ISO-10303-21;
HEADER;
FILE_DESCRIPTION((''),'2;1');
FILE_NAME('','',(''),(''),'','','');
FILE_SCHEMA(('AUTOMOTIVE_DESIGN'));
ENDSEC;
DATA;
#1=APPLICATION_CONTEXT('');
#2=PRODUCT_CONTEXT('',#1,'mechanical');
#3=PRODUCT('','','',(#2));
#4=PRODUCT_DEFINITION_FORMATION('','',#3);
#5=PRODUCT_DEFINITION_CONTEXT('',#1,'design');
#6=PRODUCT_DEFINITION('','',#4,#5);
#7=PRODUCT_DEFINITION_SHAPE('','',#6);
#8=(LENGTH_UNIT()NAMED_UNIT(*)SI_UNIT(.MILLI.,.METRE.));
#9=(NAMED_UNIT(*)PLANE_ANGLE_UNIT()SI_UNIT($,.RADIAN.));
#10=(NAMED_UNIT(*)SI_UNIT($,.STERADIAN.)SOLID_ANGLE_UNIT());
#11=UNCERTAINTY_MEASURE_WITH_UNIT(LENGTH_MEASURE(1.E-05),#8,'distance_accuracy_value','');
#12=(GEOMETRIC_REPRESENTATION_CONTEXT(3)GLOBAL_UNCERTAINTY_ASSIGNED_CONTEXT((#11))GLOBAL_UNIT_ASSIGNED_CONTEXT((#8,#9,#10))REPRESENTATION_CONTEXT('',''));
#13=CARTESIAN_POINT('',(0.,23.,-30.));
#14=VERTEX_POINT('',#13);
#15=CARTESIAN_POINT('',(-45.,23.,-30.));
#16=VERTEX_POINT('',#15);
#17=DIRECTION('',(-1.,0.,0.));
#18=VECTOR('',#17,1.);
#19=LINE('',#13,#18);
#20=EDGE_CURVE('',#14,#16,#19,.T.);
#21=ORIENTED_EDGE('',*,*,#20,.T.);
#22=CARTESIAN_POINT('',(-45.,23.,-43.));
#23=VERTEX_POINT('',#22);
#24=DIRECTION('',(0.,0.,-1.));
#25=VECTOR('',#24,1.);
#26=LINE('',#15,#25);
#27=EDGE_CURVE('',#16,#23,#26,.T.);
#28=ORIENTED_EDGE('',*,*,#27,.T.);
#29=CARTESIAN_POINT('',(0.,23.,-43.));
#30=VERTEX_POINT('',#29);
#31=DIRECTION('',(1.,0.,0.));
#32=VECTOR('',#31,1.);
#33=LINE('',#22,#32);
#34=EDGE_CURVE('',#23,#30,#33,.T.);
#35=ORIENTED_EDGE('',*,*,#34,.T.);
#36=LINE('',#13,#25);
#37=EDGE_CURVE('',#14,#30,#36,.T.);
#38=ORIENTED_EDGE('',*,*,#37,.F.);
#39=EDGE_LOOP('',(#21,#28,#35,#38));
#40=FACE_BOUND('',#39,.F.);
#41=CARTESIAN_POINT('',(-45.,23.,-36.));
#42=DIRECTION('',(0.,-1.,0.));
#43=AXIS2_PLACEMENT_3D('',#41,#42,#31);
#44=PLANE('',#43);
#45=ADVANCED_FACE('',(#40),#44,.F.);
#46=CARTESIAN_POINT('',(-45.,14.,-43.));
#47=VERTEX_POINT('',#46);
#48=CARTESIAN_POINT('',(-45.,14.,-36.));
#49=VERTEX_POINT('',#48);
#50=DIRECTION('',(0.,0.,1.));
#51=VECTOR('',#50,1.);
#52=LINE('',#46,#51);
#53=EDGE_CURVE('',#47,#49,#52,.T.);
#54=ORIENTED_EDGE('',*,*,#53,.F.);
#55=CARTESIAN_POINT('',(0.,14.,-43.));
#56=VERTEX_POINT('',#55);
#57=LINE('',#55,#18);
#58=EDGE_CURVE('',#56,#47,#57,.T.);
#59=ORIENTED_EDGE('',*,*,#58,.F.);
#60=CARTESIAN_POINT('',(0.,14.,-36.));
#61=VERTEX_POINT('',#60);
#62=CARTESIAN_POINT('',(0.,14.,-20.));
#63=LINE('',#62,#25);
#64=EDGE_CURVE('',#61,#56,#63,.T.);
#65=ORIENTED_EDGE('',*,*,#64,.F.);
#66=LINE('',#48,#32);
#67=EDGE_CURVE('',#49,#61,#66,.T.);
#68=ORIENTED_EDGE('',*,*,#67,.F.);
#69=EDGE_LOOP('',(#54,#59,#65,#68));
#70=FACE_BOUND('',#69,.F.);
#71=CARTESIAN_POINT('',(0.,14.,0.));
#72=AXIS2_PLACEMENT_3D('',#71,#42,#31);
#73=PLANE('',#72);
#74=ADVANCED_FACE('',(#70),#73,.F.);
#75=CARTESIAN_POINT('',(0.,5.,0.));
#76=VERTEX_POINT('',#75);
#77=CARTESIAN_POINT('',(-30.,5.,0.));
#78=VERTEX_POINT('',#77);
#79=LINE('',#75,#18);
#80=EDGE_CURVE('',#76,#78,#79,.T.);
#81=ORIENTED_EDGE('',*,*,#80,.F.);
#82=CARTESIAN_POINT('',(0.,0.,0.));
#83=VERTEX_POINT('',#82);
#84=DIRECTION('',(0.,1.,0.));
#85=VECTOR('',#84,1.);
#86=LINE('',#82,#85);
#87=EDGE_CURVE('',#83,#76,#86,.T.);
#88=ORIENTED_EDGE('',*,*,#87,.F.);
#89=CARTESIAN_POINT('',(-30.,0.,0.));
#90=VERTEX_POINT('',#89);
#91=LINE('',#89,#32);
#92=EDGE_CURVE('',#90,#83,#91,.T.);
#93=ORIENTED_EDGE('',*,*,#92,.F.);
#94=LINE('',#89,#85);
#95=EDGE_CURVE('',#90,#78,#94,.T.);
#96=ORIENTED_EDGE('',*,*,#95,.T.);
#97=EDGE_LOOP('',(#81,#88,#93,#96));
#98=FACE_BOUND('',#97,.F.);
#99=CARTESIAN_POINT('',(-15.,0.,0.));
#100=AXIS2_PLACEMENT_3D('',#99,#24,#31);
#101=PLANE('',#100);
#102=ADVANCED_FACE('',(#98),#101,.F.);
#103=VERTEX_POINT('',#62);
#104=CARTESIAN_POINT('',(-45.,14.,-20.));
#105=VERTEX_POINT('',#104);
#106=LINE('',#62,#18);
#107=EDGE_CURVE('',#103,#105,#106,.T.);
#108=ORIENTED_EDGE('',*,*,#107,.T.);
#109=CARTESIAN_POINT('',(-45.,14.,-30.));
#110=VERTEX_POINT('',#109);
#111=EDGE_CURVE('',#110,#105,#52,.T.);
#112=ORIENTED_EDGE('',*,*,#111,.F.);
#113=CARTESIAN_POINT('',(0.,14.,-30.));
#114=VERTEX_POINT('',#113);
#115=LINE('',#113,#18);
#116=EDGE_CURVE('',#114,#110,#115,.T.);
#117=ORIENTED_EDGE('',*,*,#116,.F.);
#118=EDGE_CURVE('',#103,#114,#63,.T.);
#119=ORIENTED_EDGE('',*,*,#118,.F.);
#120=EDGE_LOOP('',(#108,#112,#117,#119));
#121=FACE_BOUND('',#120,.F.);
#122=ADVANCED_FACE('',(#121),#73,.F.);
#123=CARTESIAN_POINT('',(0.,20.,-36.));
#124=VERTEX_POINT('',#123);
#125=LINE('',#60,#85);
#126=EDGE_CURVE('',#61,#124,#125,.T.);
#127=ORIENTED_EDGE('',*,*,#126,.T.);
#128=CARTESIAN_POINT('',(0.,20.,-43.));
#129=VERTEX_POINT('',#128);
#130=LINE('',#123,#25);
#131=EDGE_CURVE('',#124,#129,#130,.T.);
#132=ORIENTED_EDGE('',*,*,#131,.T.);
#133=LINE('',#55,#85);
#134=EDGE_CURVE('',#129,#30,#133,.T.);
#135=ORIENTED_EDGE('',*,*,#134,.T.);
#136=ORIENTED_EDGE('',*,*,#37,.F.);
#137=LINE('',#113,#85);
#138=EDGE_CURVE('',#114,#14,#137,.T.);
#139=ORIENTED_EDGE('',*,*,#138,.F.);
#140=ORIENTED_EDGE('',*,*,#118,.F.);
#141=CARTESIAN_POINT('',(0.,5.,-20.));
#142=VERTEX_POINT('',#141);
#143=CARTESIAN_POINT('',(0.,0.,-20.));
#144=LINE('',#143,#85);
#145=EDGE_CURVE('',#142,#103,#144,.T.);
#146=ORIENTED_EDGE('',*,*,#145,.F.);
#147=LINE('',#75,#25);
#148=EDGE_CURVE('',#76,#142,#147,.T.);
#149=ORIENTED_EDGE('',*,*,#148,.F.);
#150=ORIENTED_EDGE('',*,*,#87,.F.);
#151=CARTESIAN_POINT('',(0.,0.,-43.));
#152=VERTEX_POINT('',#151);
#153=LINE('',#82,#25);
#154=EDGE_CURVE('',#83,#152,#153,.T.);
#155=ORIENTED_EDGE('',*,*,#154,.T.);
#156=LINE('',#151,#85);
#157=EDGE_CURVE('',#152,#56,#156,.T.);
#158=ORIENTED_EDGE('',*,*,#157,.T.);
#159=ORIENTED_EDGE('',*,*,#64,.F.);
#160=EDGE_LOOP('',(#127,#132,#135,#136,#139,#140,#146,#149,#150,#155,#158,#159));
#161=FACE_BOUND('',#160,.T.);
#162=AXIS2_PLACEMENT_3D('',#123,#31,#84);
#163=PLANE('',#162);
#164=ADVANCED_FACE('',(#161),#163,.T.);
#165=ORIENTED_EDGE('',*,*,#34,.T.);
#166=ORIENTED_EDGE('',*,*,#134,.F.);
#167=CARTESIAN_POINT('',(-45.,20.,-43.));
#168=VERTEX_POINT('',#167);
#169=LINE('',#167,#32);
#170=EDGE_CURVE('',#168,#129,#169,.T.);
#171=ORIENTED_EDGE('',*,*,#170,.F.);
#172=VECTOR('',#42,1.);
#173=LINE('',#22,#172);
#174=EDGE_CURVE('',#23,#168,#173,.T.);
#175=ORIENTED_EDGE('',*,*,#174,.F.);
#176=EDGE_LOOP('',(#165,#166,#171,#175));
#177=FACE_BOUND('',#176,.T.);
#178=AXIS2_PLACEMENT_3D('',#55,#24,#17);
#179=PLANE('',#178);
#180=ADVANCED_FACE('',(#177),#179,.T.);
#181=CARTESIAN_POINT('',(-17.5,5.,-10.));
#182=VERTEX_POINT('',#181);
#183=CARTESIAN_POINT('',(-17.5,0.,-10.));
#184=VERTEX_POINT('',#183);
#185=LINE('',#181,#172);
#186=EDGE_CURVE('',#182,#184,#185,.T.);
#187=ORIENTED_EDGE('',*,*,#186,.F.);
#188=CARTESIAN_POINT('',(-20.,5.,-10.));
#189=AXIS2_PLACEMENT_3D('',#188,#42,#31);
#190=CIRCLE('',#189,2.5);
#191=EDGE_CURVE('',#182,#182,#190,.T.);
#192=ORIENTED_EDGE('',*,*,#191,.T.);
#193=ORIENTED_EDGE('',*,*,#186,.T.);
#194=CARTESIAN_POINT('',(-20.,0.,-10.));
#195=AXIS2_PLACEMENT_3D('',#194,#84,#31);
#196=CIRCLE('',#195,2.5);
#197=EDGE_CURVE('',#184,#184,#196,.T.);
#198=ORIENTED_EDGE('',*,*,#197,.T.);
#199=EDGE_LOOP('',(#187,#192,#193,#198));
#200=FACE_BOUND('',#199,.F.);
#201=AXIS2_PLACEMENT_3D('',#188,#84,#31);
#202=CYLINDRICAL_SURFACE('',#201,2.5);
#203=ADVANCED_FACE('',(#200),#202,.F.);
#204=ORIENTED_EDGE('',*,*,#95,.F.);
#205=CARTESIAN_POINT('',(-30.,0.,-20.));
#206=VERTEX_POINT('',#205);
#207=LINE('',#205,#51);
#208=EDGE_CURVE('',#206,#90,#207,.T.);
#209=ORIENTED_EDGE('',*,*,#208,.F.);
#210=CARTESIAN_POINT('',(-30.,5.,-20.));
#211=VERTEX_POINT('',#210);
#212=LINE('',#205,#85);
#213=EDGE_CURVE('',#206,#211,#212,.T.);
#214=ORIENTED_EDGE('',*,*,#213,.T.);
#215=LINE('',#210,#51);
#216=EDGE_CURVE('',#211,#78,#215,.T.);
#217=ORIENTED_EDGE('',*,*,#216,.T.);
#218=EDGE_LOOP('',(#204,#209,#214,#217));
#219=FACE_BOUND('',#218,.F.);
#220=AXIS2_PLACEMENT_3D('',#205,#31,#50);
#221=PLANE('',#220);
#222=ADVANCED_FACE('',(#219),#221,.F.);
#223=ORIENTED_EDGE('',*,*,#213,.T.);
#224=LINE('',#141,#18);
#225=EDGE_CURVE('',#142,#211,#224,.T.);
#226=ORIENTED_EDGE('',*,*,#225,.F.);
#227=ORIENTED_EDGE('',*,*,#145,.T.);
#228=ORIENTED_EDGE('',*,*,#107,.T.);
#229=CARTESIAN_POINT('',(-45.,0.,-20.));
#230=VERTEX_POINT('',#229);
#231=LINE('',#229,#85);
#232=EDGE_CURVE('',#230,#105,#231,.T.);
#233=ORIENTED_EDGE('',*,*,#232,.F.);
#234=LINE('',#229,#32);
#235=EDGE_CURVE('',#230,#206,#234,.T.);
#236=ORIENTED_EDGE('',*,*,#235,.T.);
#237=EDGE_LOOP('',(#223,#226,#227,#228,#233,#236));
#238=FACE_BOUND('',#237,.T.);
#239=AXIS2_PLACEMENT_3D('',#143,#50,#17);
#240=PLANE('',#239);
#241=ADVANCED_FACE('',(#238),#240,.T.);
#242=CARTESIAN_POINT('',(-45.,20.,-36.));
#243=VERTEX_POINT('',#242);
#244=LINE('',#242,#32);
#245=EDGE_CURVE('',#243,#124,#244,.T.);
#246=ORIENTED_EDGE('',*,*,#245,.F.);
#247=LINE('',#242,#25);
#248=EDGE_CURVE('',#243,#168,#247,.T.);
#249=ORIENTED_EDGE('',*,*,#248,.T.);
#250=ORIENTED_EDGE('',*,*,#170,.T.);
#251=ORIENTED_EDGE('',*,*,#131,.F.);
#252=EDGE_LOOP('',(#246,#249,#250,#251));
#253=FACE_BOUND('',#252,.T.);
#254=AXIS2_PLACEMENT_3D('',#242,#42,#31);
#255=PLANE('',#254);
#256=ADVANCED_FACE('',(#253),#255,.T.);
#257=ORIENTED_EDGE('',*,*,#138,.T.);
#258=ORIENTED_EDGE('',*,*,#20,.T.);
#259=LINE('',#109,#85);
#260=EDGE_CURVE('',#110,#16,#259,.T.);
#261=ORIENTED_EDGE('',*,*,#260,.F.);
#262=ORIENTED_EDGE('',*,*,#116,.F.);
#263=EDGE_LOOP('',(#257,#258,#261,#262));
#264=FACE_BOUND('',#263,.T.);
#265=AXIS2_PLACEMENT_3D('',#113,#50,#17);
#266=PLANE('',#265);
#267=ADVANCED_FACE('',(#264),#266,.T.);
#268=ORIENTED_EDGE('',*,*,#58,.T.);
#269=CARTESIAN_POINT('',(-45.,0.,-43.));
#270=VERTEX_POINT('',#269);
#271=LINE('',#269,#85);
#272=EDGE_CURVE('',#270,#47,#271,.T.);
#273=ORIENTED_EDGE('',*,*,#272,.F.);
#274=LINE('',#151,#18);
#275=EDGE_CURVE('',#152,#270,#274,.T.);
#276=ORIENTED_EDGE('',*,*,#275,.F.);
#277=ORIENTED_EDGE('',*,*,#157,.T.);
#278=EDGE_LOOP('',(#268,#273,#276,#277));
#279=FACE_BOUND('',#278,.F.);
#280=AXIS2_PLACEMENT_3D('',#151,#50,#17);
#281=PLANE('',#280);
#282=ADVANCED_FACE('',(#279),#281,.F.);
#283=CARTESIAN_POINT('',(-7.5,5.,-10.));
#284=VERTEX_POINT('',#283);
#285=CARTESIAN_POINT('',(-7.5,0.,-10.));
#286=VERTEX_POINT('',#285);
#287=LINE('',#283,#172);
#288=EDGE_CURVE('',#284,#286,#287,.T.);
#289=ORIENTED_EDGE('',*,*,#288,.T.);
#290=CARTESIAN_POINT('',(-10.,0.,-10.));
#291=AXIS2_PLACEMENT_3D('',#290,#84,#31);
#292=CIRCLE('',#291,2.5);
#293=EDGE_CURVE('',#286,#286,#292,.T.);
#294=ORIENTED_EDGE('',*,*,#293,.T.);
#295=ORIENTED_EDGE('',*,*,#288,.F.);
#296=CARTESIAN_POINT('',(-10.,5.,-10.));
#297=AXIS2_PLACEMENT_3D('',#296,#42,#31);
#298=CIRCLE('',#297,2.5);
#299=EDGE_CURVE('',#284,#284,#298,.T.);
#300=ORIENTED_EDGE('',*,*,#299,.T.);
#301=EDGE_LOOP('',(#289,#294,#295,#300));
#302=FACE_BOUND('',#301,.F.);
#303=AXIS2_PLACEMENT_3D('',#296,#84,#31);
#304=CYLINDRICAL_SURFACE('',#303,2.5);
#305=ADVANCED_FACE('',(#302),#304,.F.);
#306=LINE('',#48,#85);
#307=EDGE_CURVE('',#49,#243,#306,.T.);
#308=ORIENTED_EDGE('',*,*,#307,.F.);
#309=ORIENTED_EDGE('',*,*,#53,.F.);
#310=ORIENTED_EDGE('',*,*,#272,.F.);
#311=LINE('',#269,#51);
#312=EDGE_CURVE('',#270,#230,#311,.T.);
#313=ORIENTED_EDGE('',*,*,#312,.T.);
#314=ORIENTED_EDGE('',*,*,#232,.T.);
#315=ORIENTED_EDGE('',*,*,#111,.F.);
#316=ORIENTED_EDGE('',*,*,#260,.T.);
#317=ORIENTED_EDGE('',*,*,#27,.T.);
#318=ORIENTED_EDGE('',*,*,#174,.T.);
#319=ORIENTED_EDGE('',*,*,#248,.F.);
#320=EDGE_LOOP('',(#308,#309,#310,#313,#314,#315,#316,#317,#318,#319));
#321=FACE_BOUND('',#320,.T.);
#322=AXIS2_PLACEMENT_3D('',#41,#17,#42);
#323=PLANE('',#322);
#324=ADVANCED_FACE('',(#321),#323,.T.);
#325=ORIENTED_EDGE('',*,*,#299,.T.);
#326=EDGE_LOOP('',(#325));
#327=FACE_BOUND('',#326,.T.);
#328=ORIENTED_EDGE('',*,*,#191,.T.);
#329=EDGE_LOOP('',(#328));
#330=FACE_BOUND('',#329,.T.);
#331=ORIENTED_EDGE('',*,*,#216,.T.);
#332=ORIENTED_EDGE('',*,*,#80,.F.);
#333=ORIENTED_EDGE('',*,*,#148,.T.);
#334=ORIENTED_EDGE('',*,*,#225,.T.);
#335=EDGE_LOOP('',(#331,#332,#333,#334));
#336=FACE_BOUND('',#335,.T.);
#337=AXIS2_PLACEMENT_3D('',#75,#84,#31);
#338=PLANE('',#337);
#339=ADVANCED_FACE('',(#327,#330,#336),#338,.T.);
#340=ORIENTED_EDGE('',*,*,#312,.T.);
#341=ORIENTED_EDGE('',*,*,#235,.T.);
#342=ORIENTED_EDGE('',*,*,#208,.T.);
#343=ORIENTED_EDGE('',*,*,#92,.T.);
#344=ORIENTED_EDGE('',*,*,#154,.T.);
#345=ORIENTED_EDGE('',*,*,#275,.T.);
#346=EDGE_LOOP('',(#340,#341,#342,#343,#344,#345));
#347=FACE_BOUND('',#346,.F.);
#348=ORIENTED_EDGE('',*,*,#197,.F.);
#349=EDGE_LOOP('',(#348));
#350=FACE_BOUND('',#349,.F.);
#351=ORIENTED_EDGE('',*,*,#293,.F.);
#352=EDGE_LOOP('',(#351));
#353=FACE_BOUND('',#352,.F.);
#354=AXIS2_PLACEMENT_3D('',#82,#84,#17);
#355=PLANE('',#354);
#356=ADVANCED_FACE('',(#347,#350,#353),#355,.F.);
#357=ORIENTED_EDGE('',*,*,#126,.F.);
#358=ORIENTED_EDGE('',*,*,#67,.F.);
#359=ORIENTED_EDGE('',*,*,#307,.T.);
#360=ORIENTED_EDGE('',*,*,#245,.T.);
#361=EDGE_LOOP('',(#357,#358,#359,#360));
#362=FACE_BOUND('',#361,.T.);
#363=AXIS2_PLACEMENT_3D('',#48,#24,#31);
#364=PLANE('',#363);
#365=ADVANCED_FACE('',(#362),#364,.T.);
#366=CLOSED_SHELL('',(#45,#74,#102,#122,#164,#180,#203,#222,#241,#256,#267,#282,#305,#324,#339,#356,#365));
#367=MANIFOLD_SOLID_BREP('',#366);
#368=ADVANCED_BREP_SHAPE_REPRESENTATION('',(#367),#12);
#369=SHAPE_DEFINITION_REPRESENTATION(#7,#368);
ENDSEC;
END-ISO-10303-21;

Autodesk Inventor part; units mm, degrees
ref_plane "YZ Plane" through (0, 0, 0) normal (1, 0, 0) x (0, 1, 0)
ref_plane "XZ Plane" through (0, 0, 0) normal (0, 1, 0) x (-1, 0, 0)
ref_plane "XY Plane" through (0, 0, 0) normal (0, 0, 1) x (1, 0, 0)
sketch "Esboço1" plane through (0, 0, 0) normal (1, 0, 0) x (0, 1, 0)
  point P0 (0, 0)
sketch "Esboço2" plane through (0, 0, 0) normal (0, 1, 0) x (-1, 0, 0)
  line L0 (0, 0) -> (0, -20)
  line L1 (0, -20) -> (30, -20)
  line L2 (30, -20) -> (30, 0)
  line L3 (30, 0) -> (0, 0)
  line L4 (15, 0) -> (15, -10)
  circle A0 centre (15, -10) radius 2.5
  dimension "d0" = 20
  dimension "d1" = 30
  dimension "d2" = 5
extrude "Extrusão1" add sketch "Esboço2" along normal blind 5
sketch "Esboço3" plane through (0, 0, 0) normal (0, -1, 0) x (1, 0, 0)
  line L0 (0, 0) -> (0, -20) projected
  line L1 (0, -20) -> (0, -43)
  line L2 (0, -43) -> (-45, -43)
  line L3 (-45, -43) -> (-45, -20)
  line L4 (0, -20) -> (-30, -20) projected
  line L5 (-45, -20) -> (0, -20)
  dimension "d5" = 23
  dimension "d6" = 45
extrude "Extrusão2" add sketch "Esboço3" against normal blind 14
sketch "Esboço4" plane through (0, 14, 0) normal (0, 1, 0) x (1, 0, 0)
  line L0 (0, 0) -> (0, 43) projected
  line L1 (0, 43) -> (0, 36)
  line L2 (0, 36) -> (0, 30)
  line L3 (0, 30) -> (-45, 30)
  line L4 (-45, 43) -> (-45, 20) projected
  line L5 (-45, 30) -> (-45, 36)
  line L6 (-45, 36) -> (0, 36)
  dimension "d9" = 7
  dimension "d10" = 6
extrude "Extrusão3" add sketch "Esboço4" along normal blind 9
sketch "Esboço5" plane through (-45, 14, -30) normal (0, 0, 1) x (1, 0, 0)
  point P0 (45, -14)
sketch "Esboço6" plane through (0, 14, -36) normal (0, 0, -1) x (-1, 0, 0)
  line L0 (45, 9) -> (0, 9) projected
  line L1 (0, 9) -> (45, 9)
  line L2 (45, 9) -> (45, 6)
  line L3 (45, 0) -> (45, 9) projected
  line L4 (45, 6) -> (0, 6)
  line L5 (0, 0) -> (0, 9) projected
  line L6 (0, 6) -> (0, 9)
  point P0 (0, -14)
  dimension "d13" = 3
extrude "Extrusão4" add sketch "Esboço6" along normal blind 7
sketch "Esboço7" plane through (-45, 0, -43) normal (-1, 0, 0) x (0, 0, 1)
  line L0 (23, 14) -> (13, 14) projected
  line L1 (13, 14) -> (10.3, 14)
  line L2 (10.3, 14) -> (10.3, 9.5)
  line L3 (10.3, 9.5) -> (13, 9.5)
  line L4 (13, 9.5) -> (13, 14)
  point P0 (43, 0)
  dimension "d16" = 2.7
  dimension "d17" = 4.5
extrude "Extrusão5" add sketch "Esboço7" along normal blind 10
move faces "Mover1" translate (10, 0, 0) faces at (-55, 12.5, -31.8)
sketch "Esboço8" plane through (0, 5, 0) normal (0, 1, 0) x (1, 0, 0)
  line L0 (-30, 0) -> (0, 0) projected
  line L1 (-15, 0) -> (-15, 10)
  circle A0 centre (-15, 10) radius 2.5
  dimension "d23" = 10
extrude "Extrusão6" add sketch "Esboço8" against normal blind 5
sketch "Esboço9" plane through (0, 5, 0) normal (0, 1, 0) x (1, 0, 0)
  line L0 (-30, 0) -> (0, 0) projected
  line L1 (0, 0) -> (-10, 0)
  line L2 (-10, 0) -> (-20, 0)
  line L3 (-20, 0) -> (-20, 10)
  line L4 (-10, 0) -> (-10, 10)
  circle A0 centre (-10, 10) radius 2.5
  circle A1 centre (-20, 10) radius 2.5
  dimension "d26" = 10
  dimension "d27" = 10
  dimension "d28" = 10
  dimension "d29" = 10
  dimension "d30" = 5
  dimension "d31" = 5
extrude "Extrusão7" cut sketch "Esboço9" against normal blind 5
properties part number "suporte p trilho2"
